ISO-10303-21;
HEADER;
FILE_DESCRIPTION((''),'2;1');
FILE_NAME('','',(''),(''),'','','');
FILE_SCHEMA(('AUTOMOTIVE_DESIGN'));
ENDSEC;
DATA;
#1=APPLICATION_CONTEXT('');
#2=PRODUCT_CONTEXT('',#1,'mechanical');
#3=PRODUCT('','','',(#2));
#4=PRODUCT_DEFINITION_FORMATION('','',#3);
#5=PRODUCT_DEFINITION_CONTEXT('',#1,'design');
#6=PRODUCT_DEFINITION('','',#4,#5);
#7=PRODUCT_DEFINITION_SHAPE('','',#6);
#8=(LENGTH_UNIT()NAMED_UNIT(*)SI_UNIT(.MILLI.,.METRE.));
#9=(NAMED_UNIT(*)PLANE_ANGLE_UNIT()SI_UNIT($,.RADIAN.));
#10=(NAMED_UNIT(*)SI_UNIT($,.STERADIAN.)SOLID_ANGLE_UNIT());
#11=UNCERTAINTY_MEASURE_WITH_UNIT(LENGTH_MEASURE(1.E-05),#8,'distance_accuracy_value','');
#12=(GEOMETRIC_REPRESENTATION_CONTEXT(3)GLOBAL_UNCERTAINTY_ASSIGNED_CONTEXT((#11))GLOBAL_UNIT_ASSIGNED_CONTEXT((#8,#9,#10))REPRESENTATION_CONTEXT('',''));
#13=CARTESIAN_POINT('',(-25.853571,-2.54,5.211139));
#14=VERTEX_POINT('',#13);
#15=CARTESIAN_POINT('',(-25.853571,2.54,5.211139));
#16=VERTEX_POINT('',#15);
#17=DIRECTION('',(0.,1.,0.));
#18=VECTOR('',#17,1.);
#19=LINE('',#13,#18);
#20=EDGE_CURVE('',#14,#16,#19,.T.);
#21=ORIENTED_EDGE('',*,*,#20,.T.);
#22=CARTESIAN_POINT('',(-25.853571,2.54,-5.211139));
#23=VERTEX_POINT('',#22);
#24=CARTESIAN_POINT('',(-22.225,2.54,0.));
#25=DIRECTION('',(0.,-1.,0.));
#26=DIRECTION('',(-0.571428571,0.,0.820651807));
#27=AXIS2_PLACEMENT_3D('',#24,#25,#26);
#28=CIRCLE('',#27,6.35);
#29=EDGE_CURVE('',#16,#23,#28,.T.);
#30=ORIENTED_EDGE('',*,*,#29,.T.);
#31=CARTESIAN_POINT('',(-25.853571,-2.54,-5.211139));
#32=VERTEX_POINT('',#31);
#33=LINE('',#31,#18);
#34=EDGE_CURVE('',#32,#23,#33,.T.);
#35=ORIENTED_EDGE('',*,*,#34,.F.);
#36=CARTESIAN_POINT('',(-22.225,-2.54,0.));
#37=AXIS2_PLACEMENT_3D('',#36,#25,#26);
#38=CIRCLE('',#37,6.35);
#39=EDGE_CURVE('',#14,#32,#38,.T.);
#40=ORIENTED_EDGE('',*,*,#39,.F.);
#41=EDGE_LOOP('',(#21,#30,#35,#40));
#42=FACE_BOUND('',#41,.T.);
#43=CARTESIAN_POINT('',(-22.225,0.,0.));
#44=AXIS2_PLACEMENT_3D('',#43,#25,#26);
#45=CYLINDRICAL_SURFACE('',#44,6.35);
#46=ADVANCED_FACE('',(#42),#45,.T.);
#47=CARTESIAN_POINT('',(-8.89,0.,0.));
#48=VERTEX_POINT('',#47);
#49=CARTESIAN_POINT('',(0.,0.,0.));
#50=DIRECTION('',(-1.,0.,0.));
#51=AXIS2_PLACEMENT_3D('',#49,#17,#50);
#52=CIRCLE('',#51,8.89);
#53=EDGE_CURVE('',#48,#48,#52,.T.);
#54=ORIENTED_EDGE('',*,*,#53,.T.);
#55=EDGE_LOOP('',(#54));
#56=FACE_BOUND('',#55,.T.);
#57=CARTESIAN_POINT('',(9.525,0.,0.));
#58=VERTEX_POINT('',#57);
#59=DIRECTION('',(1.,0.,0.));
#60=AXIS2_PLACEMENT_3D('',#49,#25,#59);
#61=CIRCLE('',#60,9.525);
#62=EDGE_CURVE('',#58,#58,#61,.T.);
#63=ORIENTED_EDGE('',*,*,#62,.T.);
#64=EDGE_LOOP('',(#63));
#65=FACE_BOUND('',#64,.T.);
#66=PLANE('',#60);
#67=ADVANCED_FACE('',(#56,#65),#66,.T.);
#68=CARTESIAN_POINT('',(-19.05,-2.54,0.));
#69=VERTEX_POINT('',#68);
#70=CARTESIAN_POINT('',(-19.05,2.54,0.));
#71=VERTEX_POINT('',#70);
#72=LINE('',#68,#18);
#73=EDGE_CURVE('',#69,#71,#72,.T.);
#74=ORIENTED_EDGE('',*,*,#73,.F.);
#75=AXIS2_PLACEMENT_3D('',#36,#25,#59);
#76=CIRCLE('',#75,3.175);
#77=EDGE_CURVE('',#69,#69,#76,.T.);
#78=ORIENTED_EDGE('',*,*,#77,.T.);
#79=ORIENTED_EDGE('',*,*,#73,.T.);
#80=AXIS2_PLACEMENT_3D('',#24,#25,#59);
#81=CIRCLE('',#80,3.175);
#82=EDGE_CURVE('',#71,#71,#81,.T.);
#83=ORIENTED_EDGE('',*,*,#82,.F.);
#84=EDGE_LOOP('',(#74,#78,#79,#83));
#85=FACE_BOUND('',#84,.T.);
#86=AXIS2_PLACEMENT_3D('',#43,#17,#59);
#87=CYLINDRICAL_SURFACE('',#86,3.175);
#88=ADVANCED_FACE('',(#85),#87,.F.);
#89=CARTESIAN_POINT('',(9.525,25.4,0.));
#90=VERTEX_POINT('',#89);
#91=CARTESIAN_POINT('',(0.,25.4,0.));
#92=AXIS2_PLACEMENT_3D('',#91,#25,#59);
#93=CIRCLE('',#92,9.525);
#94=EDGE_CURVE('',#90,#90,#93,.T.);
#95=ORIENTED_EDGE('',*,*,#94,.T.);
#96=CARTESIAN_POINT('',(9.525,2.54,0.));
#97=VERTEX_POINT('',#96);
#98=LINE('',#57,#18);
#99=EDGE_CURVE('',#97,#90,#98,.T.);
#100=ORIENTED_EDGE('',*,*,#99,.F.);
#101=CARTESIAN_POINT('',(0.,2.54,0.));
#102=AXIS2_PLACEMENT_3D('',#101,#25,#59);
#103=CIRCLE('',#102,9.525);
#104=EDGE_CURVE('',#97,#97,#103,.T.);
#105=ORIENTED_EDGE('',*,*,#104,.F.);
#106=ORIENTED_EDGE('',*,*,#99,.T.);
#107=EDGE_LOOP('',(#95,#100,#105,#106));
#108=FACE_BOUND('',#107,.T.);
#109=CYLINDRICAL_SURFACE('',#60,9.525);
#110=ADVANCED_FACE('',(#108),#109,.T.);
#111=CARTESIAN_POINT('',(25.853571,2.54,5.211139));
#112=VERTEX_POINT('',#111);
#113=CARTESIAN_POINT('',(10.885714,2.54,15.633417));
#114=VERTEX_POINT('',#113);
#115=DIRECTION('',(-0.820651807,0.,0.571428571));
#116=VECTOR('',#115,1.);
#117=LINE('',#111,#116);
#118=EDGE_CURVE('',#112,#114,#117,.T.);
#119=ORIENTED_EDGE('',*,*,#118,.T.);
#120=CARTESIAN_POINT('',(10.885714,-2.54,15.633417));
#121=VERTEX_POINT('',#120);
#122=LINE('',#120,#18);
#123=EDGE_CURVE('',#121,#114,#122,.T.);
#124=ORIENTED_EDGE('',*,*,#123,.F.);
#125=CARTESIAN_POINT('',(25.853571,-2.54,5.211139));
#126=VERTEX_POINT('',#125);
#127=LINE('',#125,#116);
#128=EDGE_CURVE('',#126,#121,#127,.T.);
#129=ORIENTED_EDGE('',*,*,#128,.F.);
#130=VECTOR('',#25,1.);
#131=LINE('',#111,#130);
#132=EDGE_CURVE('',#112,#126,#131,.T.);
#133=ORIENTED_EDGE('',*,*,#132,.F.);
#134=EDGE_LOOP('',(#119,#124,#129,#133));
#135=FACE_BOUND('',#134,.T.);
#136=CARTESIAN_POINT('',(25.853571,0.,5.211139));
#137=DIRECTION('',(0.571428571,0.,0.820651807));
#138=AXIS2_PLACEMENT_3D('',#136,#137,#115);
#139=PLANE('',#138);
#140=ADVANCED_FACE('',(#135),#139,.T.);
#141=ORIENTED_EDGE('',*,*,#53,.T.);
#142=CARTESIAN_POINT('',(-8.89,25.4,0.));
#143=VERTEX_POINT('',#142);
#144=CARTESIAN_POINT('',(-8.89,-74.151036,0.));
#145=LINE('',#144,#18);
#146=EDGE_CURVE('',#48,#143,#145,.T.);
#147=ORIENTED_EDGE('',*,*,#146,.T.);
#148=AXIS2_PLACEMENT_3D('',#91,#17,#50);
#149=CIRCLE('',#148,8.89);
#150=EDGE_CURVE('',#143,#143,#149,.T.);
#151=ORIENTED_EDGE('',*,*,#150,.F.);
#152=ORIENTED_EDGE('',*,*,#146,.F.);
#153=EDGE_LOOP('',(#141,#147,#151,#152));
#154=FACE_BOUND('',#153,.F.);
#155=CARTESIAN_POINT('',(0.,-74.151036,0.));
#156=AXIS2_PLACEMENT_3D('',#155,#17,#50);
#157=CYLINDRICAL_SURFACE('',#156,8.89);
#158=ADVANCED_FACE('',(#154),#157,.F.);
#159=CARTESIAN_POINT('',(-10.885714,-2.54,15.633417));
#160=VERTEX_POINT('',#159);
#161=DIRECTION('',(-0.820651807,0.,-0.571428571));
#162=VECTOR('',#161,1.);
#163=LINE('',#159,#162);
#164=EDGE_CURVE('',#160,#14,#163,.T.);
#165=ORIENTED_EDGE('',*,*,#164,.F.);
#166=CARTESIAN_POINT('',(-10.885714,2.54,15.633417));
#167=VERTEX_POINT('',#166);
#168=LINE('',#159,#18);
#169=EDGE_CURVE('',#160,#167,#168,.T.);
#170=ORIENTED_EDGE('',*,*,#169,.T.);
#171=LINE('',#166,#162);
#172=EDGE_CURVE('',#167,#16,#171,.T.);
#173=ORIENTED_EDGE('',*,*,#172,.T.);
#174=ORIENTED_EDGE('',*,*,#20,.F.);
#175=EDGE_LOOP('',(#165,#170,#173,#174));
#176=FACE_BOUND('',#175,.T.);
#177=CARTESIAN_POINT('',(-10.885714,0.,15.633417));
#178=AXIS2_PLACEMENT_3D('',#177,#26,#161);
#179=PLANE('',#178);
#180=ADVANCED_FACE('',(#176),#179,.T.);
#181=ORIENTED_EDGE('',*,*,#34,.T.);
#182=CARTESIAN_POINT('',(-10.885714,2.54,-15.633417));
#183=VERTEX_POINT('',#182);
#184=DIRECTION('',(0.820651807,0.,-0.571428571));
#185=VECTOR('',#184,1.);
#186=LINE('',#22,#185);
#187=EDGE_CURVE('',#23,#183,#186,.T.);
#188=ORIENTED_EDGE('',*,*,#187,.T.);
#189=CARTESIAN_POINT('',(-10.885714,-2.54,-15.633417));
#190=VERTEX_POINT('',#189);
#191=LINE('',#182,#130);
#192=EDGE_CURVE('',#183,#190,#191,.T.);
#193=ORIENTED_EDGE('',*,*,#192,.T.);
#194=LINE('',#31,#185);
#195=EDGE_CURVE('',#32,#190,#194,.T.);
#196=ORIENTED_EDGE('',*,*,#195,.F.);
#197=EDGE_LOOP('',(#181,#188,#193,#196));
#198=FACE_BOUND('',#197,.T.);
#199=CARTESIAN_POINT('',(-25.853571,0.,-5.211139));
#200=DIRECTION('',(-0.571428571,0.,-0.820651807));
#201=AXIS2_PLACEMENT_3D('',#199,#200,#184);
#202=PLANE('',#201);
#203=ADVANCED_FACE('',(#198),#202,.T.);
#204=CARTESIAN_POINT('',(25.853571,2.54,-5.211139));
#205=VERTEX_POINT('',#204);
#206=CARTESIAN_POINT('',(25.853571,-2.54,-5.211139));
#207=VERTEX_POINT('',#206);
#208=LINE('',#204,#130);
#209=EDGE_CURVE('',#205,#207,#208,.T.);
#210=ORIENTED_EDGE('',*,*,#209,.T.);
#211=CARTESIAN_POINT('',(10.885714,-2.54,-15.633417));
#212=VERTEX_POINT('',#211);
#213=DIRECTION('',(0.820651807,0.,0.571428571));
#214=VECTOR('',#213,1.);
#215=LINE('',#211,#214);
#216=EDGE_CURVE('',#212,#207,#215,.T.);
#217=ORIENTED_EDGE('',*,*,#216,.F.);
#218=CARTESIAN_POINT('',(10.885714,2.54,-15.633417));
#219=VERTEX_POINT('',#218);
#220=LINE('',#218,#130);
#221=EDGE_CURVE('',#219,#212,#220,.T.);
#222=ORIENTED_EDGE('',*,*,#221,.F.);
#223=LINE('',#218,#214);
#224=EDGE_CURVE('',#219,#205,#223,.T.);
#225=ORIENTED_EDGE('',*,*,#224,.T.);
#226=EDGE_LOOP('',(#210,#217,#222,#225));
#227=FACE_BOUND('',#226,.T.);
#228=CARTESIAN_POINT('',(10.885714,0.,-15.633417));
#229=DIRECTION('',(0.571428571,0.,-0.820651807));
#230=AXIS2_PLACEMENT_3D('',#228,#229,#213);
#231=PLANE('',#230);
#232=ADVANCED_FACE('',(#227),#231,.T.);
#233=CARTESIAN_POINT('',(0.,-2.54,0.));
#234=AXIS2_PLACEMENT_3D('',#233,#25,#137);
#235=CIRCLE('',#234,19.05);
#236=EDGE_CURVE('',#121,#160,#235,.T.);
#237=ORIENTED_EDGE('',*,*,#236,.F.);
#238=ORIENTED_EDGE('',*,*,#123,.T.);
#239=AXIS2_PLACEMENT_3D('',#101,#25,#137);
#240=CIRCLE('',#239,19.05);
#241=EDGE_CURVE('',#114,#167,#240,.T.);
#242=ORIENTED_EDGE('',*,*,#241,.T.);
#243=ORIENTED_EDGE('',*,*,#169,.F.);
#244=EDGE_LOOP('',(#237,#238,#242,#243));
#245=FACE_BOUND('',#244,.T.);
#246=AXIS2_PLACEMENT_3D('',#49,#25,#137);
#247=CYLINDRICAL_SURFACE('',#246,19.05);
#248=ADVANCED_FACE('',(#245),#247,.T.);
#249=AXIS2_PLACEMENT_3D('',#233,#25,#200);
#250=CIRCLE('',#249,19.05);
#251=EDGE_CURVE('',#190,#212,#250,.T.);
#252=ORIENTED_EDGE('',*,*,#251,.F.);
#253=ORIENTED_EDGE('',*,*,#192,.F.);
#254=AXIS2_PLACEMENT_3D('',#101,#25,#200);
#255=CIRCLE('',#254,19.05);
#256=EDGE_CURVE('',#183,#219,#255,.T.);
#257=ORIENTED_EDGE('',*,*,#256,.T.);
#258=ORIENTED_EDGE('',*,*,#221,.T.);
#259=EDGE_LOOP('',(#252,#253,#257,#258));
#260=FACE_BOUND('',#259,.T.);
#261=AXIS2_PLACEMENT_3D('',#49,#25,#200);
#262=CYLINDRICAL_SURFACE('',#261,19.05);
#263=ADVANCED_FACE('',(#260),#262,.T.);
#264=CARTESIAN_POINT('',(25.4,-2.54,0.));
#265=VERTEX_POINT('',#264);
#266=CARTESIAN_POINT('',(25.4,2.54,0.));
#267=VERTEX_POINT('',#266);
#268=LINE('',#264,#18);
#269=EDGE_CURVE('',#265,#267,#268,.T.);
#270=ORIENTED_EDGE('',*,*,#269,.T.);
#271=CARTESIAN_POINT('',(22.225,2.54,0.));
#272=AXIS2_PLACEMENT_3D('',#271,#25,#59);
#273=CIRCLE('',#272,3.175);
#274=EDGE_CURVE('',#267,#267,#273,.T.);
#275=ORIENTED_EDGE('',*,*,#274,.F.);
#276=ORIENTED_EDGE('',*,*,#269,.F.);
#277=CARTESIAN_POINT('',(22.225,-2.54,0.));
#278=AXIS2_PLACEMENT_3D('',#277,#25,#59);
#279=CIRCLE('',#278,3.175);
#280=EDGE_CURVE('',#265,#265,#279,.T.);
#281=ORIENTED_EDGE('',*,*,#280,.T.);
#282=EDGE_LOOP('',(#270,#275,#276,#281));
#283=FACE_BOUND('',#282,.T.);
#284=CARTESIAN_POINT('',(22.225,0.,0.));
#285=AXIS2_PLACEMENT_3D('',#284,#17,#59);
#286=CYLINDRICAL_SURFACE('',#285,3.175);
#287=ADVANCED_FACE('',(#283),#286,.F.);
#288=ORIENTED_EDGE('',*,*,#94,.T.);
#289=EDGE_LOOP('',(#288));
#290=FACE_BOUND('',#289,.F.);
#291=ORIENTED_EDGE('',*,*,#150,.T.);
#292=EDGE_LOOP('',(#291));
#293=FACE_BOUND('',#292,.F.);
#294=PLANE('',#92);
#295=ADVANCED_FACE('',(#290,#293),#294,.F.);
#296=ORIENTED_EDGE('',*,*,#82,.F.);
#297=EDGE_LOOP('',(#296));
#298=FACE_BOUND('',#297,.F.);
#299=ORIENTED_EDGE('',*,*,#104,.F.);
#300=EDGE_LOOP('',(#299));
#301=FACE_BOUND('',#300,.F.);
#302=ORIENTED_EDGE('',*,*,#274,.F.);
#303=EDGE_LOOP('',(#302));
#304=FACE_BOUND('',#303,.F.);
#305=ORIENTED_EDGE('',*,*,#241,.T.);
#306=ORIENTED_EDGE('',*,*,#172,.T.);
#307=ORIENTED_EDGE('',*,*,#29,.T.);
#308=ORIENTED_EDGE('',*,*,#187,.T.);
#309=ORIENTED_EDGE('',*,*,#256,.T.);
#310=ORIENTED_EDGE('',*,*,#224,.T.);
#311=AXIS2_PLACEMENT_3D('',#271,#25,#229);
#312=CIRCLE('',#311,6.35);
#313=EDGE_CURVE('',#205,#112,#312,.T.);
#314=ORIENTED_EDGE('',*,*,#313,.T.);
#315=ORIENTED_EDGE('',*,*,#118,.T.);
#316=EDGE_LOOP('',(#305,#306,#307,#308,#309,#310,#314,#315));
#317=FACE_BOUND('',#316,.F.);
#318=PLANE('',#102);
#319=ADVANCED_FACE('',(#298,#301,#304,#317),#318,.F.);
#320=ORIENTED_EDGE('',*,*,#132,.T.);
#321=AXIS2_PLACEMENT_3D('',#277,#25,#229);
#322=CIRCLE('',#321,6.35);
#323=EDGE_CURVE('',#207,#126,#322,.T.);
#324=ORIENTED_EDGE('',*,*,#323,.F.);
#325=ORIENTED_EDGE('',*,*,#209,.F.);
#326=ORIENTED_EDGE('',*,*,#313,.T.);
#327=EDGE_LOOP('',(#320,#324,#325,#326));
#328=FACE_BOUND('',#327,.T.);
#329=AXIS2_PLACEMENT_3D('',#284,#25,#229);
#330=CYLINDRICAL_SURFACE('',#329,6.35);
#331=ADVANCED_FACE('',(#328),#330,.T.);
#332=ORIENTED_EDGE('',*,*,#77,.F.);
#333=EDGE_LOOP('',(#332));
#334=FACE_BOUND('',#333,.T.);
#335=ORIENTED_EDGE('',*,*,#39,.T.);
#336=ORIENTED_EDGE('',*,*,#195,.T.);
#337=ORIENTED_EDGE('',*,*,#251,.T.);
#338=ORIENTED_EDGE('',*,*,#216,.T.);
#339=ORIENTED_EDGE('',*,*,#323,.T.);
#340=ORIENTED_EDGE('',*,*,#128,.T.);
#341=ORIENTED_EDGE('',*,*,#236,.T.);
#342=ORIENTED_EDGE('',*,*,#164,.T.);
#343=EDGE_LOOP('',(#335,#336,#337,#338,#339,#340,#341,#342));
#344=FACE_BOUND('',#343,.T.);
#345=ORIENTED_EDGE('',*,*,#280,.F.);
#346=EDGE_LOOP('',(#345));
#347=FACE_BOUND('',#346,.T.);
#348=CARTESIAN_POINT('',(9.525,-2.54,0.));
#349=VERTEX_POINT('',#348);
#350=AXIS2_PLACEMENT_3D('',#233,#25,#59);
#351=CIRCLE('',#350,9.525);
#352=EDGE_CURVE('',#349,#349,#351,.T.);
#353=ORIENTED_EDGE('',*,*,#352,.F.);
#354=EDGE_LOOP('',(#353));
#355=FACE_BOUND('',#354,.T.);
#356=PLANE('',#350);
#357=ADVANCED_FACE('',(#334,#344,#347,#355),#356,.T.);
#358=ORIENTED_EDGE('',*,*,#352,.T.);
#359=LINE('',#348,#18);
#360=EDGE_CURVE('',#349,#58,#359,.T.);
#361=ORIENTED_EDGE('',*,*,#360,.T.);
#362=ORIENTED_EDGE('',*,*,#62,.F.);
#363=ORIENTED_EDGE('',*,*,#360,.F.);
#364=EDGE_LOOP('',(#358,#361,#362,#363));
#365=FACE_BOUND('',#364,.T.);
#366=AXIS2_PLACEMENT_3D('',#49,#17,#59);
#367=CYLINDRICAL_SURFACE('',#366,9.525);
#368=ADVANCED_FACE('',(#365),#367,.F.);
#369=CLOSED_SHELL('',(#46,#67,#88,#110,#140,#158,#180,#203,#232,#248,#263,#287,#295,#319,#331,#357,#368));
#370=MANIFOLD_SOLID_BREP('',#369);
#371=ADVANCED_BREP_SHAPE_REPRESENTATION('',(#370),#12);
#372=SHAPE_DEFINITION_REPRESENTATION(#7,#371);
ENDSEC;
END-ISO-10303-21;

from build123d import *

# Parameters (mm, degrees)
F0_R     = 3.175
F0_R_2   = 9.525
F1_DEPTH = 2.54
F2_DEPTH = 25.4
F3_D     = 17.78


with BuildPart() as f1:
    # F0 (on Front) → F1 (new body, symmetric)
    with BuildSketch(Plane.XZ):
        with BuildLine():
            Line((-25.8535714286, -5.2111389722), (-10.8857142857, -15.6334169166))
            ThreePointArc((-10.8857142857, -15.6334169166), (0, -19.05), (10.8857142857, -15.6334169166))
            Line((10.8857142857, -15.6334169166), (25.8535714286, -5.2111389722))
            ThreePointArc((25.8535714286, -5.2111389722), (28.575, 0), (25.8535714286, 5.2111389722))
            Line((25.8535714286, 5.2111389722), (10.8857142857, 15.6334169166))
            ThreePointArc((10.8857142857, 15.6334169166), (0, 19.05), (-10.8857142857, 15.6334169166))
            Line((-10.8857142857, 15.6334169166), (-25.8535714286, 5.2111389722))
            ThreePointArc((-25.8535714286, 5.2111389722), (-28.575, 0), (-25.8535714286, -5.2111389722))
        make_face()
        with Locations((-22.225, 0)):
            Circle(F0_R, mode=Mode.SUBTRACT)
        Circle(F0_R_2, mode=Mode.SUBTRACT)
        with Locations((22.225, 0)):
            Circle(F0_R, mode=Mode.SUBTRACT)
    extrude(amount=F1_DEPTH, both=True)

    # F0 (on Front) → F2 (join)
    with BuildSketch(Plane.XZ):
        Circle(F0_R_2)
    extrude(amount=-F2_DEPTH)

    # F3 (through all)
    with Locations(Plane.XZ):
        with Locations((0, 0)):
            Hole(F3_D / 2)


solid = f1.part
